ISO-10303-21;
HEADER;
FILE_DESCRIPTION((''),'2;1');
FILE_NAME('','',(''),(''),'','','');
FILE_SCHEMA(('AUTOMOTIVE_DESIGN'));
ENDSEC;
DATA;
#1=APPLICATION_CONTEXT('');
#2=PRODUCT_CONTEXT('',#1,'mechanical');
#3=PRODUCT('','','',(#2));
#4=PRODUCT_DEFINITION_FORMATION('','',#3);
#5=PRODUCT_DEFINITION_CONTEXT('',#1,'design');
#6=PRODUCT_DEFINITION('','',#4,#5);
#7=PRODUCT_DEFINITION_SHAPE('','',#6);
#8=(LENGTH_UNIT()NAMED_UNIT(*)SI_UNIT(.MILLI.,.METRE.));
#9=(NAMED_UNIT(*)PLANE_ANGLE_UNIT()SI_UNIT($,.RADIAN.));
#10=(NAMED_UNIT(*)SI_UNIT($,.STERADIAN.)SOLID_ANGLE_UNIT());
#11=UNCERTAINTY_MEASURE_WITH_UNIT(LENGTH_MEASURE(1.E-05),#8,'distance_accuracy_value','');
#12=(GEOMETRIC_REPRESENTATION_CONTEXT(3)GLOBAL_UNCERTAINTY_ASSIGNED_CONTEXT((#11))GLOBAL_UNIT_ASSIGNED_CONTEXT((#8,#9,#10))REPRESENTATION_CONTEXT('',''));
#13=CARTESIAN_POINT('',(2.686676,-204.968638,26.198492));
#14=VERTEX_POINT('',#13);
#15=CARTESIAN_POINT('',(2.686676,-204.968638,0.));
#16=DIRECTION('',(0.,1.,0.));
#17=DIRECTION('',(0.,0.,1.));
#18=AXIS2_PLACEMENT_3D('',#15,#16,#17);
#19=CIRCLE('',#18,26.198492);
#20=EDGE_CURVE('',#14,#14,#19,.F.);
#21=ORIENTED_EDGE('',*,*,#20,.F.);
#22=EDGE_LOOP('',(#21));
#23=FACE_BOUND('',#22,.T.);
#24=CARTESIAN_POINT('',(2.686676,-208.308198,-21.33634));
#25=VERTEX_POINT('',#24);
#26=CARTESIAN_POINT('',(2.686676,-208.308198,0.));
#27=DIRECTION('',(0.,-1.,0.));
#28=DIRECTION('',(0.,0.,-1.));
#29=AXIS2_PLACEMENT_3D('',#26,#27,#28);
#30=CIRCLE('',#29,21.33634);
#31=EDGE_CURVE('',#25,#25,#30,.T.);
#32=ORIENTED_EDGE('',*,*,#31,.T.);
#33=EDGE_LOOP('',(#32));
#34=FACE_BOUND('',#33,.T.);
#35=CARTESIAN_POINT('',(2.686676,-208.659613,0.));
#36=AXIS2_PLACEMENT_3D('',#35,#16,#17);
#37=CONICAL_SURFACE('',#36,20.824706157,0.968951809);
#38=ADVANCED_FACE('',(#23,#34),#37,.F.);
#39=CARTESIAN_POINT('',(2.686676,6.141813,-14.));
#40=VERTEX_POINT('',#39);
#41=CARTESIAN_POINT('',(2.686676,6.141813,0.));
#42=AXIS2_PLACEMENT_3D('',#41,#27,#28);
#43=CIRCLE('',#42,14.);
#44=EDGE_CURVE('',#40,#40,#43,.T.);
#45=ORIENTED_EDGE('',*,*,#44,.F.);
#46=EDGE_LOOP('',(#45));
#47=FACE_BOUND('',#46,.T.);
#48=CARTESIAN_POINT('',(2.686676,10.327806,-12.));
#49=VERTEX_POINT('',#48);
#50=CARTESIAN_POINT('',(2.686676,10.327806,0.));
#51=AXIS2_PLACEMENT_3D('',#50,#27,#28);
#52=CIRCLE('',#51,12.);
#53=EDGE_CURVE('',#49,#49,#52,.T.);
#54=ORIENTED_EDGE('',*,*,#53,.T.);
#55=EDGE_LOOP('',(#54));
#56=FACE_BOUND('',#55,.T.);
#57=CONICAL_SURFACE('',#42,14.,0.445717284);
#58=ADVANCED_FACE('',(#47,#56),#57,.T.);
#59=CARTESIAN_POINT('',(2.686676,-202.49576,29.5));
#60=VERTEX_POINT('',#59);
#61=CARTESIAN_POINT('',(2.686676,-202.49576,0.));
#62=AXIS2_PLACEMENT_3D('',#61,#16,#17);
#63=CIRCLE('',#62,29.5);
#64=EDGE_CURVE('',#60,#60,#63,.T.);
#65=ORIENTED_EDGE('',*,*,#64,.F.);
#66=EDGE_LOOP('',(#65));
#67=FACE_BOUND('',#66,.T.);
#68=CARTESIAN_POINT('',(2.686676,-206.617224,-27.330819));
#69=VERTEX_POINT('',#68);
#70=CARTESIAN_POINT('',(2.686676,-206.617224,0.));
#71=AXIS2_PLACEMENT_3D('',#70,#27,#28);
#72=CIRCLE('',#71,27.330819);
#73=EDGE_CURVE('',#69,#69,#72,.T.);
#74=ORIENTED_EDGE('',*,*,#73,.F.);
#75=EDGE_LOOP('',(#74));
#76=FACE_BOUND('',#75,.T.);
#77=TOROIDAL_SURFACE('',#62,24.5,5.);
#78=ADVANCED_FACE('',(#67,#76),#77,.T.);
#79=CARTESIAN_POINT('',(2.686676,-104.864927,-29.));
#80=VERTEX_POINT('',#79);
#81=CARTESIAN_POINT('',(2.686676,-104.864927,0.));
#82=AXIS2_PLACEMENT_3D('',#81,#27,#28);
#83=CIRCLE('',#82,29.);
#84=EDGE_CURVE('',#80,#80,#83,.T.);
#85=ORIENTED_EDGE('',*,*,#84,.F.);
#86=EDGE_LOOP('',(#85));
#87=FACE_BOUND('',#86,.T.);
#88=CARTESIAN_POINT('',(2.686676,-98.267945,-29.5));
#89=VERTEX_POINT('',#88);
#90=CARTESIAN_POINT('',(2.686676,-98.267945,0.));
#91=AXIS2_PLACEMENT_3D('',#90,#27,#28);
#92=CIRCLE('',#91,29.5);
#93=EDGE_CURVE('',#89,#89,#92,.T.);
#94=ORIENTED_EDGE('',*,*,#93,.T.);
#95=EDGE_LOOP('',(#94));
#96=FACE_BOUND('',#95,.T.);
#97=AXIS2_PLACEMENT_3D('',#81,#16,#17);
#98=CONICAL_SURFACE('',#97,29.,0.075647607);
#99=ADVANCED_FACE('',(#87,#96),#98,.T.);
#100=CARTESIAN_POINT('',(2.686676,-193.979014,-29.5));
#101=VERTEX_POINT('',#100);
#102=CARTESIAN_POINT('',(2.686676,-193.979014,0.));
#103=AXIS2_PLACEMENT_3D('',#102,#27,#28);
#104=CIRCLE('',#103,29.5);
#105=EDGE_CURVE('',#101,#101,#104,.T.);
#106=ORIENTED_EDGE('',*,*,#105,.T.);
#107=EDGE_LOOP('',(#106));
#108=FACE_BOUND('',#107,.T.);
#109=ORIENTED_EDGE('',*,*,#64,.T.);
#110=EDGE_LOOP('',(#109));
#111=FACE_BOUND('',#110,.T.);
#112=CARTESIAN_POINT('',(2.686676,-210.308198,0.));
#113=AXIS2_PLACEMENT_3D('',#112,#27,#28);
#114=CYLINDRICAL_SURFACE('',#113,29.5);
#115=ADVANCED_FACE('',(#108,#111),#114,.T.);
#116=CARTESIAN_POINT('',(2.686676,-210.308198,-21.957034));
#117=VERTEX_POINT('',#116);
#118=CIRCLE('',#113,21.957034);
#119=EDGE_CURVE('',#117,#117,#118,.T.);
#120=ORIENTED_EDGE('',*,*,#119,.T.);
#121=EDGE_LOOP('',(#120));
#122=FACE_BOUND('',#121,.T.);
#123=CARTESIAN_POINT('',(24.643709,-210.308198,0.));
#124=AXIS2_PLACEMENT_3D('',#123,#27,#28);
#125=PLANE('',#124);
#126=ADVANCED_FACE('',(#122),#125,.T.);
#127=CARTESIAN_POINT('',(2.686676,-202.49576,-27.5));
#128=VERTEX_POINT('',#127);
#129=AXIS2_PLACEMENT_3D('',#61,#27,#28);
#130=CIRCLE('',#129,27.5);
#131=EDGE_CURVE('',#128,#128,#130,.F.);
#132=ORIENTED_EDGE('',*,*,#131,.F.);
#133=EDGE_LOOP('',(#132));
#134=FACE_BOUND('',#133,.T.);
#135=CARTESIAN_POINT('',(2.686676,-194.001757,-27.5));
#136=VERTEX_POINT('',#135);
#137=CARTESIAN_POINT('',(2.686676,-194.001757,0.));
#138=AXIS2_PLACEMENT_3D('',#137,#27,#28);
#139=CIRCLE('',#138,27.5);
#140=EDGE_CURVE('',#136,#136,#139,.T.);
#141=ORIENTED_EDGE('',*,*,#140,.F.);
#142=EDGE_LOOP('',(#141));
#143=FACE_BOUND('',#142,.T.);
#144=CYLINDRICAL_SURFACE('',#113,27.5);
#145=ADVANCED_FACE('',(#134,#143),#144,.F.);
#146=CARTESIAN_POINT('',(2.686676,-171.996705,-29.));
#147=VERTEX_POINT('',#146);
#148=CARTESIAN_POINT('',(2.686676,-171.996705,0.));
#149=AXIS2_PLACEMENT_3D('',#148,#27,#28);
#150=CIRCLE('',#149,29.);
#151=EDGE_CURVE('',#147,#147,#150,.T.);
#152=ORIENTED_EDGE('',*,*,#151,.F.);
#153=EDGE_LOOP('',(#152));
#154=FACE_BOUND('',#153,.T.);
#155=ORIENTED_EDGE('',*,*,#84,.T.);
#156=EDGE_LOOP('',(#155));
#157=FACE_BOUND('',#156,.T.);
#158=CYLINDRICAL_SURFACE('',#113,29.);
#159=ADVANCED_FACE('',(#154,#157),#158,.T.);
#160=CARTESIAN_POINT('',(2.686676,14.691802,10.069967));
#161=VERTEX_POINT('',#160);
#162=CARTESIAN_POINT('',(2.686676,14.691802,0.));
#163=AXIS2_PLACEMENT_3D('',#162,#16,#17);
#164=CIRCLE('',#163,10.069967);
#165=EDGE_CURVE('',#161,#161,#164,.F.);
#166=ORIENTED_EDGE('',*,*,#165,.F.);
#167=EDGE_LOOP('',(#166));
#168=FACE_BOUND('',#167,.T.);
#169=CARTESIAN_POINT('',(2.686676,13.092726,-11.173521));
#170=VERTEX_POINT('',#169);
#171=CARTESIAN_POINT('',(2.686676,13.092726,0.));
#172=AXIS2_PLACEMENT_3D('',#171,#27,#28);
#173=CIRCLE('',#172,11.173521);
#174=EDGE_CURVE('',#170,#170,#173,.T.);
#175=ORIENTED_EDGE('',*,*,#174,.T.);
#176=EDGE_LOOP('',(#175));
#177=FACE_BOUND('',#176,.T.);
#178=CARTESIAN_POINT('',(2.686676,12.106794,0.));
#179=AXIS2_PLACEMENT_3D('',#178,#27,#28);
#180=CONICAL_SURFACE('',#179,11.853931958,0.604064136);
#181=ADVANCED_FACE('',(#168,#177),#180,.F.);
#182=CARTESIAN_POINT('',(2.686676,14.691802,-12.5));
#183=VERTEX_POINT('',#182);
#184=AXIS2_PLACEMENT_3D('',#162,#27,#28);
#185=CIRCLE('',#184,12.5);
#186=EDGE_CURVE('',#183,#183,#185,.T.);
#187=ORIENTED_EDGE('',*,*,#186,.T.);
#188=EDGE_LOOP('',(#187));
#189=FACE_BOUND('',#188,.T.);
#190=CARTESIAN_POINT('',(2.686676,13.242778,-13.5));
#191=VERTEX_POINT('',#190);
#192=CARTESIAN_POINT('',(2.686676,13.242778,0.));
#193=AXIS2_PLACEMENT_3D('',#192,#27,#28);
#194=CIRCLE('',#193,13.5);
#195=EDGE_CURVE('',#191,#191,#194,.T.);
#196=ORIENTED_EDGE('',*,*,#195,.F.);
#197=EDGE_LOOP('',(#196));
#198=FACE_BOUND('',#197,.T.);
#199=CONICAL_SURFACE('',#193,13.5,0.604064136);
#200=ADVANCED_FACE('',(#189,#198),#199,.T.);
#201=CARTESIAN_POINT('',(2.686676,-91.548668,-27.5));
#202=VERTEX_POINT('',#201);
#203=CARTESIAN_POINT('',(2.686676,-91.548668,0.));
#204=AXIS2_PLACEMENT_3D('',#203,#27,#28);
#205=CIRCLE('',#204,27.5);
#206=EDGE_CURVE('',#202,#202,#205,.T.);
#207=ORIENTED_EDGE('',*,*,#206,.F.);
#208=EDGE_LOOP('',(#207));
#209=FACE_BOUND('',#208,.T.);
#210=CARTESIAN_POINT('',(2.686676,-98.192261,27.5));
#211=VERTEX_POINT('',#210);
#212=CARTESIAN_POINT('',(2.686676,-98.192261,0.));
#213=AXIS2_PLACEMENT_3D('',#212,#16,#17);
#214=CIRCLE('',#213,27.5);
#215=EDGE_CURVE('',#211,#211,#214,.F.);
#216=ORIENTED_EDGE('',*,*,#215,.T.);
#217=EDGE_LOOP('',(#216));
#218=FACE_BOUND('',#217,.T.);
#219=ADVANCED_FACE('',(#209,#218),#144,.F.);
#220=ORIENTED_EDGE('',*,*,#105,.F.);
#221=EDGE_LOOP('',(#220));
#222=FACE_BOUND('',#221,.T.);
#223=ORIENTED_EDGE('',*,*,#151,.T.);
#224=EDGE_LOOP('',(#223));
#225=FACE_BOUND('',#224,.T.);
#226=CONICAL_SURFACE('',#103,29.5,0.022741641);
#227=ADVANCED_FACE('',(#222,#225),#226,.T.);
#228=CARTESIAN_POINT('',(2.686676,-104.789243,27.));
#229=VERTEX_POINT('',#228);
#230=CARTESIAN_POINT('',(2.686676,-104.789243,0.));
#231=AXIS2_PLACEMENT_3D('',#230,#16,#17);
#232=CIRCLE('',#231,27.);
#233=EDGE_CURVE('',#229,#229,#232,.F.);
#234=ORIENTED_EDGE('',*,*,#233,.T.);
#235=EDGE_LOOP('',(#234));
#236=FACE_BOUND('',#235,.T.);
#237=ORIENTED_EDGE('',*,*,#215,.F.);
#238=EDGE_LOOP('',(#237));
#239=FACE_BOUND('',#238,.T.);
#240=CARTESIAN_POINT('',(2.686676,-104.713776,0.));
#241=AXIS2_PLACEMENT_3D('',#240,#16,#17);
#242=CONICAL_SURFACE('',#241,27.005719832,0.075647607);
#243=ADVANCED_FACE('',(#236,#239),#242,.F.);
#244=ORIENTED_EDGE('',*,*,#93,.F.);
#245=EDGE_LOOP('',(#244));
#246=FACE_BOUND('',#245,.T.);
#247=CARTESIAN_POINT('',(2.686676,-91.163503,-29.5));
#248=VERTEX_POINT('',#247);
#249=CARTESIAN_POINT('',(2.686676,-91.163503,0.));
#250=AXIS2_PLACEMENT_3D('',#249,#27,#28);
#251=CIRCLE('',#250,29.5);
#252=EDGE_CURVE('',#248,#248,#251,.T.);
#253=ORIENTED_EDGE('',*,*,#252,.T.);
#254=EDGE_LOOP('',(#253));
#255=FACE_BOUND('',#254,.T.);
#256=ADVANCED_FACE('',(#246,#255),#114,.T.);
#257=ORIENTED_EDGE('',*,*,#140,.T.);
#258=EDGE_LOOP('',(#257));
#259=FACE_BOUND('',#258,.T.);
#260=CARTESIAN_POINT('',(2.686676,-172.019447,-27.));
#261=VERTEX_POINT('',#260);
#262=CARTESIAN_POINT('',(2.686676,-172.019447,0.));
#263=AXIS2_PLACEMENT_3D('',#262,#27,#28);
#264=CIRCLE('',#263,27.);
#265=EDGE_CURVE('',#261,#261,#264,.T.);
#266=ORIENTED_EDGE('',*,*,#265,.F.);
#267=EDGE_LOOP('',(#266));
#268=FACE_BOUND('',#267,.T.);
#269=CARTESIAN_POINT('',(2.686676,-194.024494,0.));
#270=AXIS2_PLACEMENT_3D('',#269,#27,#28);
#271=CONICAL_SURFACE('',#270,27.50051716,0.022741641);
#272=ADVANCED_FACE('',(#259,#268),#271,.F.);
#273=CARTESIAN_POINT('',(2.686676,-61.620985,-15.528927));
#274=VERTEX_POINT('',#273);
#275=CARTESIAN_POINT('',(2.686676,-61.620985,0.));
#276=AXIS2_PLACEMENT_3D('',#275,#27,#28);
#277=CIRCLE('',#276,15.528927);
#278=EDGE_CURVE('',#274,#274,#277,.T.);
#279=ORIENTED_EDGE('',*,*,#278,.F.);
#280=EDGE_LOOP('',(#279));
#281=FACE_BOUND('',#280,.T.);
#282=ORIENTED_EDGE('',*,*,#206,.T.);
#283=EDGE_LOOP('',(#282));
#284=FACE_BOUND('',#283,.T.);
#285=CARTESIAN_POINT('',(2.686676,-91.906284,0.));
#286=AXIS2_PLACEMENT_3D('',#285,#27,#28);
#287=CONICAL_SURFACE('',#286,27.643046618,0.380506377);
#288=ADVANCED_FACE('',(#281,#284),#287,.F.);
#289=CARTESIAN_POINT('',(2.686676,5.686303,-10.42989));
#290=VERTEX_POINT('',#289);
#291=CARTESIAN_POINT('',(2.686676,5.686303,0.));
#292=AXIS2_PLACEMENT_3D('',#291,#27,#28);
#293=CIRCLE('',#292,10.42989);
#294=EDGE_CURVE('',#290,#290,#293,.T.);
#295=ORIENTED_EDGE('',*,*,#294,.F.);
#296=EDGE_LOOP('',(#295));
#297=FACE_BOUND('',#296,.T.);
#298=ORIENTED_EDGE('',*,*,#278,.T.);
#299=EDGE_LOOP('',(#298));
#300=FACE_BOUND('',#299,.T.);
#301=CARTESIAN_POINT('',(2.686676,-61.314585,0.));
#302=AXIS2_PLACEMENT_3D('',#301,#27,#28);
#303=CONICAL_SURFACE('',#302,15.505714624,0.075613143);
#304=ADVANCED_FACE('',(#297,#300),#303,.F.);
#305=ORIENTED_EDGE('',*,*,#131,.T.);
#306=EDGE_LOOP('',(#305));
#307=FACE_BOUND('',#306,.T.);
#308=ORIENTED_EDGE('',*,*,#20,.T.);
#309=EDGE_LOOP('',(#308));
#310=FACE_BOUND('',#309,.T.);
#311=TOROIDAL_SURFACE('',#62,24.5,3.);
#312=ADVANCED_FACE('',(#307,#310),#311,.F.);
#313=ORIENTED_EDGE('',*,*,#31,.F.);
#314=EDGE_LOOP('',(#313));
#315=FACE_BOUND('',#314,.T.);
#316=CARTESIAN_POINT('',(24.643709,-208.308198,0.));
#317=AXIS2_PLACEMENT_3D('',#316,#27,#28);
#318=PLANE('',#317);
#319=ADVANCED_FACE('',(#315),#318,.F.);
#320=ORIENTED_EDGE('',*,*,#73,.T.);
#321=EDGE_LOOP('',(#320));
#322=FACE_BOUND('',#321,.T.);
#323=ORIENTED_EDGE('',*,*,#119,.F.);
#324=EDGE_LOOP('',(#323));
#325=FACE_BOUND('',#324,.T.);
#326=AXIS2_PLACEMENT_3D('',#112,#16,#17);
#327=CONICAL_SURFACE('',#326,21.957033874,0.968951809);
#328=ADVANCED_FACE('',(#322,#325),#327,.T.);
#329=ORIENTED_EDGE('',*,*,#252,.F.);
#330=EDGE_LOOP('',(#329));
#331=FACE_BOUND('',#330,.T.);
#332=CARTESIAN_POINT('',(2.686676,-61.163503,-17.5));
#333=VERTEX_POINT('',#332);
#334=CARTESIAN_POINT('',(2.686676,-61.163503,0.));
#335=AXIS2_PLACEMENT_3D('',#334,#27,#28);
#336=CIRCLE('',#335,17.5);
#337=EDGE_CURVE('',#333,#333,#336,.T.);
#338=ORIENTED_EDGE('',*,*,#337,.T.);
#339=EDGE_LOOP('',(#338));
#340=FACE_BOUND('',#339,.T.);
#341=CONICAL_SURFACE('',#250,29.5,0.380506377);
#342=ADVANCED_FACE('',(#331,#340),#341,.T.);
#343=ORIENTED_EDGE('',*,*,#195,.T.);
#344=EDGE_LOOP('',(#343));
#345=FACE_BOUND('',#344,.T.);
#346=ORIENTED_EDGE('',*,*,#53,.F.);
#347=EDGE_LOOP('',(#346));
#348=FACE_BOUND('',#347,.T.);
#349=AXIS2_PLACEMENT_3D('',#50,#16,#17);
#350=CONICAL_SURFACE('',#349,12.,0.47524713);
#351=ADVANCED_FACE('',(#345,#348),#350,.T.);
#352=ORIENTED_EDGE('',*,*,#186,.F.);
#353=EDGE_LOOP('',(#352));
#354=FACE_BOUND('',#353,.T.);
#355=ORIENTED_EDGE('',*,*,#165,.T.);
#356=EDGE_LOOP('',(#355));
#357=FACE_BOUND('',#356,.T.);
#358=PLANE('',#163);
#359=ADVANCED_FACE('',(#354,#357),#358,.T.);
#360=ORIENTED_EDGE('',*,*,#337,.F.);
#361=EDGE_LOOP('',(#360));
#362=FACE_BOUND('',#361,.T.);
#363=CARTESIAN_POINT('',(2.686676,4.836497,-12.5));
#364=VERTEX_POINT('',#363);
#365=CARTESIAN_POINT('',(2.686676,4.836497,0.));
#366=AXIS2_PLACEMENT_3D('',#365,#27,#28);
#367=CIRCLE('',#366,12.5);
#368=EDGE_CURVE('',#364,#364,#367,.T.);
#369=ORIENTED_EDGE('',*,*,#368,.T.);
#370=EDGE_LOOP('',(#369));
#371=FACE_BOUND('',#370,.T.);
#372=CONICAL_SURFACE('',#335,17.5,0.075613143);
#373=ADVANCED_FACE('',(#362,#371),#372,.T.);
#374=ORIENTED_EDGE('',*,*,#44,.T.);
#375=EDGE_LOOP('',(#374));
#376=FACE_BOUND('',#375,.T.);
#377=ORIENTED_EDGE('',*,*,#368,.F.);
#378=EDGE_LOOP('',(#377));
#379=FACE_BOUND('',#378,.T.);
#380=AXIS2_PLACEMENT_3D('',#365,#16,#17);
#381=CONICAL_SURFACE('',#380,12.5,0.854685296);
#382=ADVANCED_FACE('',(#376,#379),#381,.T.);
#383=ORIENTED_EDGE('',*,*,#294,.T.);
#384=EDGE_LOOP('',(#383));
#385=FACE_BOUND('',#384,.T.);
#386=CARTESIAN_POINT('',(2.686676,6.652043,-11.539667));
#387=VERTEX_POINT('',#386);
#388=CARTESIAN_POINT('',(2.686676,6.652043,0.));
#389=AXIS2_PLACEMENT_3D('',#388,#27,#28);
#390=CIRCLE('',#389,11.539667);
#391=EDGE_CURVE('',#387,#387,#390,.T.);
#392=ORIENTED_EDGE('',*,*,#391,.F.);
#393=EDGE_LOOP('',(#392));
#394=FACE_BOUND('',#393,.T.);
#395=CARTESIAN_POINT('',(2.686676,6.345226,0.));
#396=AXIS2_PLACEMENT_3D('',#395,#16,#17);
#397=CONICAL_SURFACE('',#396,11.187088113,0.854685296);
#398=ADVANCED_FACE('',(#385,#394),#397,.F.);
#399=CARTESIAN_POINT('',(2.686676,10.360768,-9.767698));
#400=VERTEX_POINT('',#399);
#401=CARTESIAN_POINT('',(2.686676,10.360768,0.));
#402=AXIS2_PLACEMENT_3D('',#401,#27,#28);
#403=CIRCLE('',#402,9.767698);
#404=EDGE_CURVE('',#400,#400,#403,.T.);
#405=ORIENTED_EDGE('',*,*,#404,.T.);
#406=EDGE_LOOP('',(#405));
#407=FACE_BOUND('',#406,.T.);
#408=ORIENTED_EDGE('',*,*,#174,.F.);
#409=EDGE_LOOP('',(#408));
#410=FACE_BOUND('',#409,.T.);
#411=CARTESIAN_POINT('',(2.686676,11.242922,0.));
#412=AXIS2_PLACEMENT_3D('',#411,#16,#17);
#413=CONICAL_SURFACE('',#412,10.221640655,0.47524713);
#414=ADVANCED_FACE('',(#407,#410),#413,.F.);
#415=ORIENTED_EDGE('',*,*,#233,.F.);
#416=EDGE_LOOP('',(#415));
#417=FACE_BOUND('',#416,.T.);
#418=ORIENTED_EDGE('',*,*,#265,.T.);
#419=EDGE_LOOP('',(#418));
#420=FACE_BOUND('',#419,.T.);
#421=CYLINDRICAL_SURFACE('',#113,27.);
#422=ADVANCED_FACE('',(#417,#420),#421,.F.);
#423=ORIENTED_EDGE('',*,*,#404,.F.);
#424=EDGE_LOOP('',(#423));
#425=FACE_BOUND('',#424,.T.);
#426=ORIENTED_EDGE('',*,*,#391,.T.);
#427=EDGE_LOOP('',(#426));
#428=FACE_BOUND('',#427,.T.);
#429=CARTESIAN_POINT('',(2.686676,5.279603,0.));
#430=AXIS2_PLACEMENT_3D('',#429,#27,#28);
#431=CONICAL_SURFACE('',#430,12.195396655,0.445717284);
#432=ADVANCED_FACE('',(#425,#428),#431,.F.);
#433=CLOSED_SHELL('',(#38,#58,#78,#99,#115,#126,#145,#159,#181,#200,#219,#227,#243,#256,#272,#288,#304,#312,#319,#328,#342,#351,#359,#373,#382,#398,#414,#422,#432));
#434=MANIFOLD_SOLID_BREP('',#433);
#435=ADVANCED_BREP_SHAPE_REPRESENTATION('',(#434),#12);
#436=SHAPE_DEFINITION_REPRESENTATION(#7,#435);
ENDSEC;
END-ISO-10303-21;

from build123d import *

# Parameters (mm, degrees)
FILLET2_R = 5


# Read off the part's stored shape, not the designer's step: Shell2
with BuildPart() as part:
    # Sketch1 → Revolve1 (revolve)
    with BuildSketch(Plane.XY, mode=Mode.PRIVATE) as revolve1_sk:
        Polygon((2.686675584, 14.691802026), (15.186675584, 14.691802026), (16.186675584, 13.242778256), (14.686675584, 10.327805917), (16.686675584, 6.141812908), (15.186675584, 4.836496853), (20.186675584, -61.163503147), (32.186675584, -91.163503147), (32.186675584, -98.267944917), (31.686675584, -104.864926562), (31.686675584, -171.996704513), (32.186675584, -193.979014243), (32.186675584, -205.127326289), (24.643709458, -210.308197974), (2.686675584, -210.308197974), align=None)
    revolve(revolve1_sk.sketch.rotate(Axis((2.686675584, -210.308197974, 0), (0, 1, 0)), 90), axis=Axis((2.686675584, -210.308197974, 0), (0, 1, 0)))

    # Fillet2
    fillet2_edges = [part.edges().sort_by_distance(p)[0] for p in [
        (2.686675584, -205.127326289, 29.5),
    ]]
    fillet(fillet2_edges, radius=FILLET2_R)

    # Shell2 outline → Shell2 (revolve, cut)
    with BuildSketch(Plane(origin=(2.686675584, 0, 0), x_dir=(1, 0, 0), z_dir=(0, 0, 1))):
        with BuildLine():
            Line((9.76769763, 10.360768085), (11.173521052, 13.092725677))
            Line((11.173521052, 13.092725677), (10.069966795, 14.691802026))
            Line((10.069966795, 14.691802026), (0, 14.691802026))
            Line((0, 14.691802026), (0, -208.308197974))
            Line((0, -208.308197974), (21.336339779, -208.308197974))
            Line((21.336339779, -208.308197974), (26.198491575, -204.968638423))
            ThreePointArc((26.198491575, -204.968638423), (27.154757496, -203.892994192), (27.5, -202.495760268))
            Line((27.5, -202.495760268), (27.5, -194.001756864))
            Line((27.5, -194.001756864), (27, -172.019447135))
            Line((27, -172.019447135), (27, -104.789242859))
            Line((27, -104.789242859), (27.5, -98.192261215))
            Line((27.5, -98.192261215), (27.5, -91.548667954))
            Line((27.5, -91.548667954), (15.528926693, -61.620984687))
            Line((15.528926693, -61.620984687), (10.429889715, 5.686303432))
            Line((10.429889715, 5.686303432), (11.539666623, 6.652043176))
            Line((11.539666623, 6.652043176), (9.76769763, 10.360768085))
        make_face()
    revolve(axis=Axis((2.686675584, 0, 0), (0, 1, 0)), mode=Mode.SUBTRACT)


solid = part.part
